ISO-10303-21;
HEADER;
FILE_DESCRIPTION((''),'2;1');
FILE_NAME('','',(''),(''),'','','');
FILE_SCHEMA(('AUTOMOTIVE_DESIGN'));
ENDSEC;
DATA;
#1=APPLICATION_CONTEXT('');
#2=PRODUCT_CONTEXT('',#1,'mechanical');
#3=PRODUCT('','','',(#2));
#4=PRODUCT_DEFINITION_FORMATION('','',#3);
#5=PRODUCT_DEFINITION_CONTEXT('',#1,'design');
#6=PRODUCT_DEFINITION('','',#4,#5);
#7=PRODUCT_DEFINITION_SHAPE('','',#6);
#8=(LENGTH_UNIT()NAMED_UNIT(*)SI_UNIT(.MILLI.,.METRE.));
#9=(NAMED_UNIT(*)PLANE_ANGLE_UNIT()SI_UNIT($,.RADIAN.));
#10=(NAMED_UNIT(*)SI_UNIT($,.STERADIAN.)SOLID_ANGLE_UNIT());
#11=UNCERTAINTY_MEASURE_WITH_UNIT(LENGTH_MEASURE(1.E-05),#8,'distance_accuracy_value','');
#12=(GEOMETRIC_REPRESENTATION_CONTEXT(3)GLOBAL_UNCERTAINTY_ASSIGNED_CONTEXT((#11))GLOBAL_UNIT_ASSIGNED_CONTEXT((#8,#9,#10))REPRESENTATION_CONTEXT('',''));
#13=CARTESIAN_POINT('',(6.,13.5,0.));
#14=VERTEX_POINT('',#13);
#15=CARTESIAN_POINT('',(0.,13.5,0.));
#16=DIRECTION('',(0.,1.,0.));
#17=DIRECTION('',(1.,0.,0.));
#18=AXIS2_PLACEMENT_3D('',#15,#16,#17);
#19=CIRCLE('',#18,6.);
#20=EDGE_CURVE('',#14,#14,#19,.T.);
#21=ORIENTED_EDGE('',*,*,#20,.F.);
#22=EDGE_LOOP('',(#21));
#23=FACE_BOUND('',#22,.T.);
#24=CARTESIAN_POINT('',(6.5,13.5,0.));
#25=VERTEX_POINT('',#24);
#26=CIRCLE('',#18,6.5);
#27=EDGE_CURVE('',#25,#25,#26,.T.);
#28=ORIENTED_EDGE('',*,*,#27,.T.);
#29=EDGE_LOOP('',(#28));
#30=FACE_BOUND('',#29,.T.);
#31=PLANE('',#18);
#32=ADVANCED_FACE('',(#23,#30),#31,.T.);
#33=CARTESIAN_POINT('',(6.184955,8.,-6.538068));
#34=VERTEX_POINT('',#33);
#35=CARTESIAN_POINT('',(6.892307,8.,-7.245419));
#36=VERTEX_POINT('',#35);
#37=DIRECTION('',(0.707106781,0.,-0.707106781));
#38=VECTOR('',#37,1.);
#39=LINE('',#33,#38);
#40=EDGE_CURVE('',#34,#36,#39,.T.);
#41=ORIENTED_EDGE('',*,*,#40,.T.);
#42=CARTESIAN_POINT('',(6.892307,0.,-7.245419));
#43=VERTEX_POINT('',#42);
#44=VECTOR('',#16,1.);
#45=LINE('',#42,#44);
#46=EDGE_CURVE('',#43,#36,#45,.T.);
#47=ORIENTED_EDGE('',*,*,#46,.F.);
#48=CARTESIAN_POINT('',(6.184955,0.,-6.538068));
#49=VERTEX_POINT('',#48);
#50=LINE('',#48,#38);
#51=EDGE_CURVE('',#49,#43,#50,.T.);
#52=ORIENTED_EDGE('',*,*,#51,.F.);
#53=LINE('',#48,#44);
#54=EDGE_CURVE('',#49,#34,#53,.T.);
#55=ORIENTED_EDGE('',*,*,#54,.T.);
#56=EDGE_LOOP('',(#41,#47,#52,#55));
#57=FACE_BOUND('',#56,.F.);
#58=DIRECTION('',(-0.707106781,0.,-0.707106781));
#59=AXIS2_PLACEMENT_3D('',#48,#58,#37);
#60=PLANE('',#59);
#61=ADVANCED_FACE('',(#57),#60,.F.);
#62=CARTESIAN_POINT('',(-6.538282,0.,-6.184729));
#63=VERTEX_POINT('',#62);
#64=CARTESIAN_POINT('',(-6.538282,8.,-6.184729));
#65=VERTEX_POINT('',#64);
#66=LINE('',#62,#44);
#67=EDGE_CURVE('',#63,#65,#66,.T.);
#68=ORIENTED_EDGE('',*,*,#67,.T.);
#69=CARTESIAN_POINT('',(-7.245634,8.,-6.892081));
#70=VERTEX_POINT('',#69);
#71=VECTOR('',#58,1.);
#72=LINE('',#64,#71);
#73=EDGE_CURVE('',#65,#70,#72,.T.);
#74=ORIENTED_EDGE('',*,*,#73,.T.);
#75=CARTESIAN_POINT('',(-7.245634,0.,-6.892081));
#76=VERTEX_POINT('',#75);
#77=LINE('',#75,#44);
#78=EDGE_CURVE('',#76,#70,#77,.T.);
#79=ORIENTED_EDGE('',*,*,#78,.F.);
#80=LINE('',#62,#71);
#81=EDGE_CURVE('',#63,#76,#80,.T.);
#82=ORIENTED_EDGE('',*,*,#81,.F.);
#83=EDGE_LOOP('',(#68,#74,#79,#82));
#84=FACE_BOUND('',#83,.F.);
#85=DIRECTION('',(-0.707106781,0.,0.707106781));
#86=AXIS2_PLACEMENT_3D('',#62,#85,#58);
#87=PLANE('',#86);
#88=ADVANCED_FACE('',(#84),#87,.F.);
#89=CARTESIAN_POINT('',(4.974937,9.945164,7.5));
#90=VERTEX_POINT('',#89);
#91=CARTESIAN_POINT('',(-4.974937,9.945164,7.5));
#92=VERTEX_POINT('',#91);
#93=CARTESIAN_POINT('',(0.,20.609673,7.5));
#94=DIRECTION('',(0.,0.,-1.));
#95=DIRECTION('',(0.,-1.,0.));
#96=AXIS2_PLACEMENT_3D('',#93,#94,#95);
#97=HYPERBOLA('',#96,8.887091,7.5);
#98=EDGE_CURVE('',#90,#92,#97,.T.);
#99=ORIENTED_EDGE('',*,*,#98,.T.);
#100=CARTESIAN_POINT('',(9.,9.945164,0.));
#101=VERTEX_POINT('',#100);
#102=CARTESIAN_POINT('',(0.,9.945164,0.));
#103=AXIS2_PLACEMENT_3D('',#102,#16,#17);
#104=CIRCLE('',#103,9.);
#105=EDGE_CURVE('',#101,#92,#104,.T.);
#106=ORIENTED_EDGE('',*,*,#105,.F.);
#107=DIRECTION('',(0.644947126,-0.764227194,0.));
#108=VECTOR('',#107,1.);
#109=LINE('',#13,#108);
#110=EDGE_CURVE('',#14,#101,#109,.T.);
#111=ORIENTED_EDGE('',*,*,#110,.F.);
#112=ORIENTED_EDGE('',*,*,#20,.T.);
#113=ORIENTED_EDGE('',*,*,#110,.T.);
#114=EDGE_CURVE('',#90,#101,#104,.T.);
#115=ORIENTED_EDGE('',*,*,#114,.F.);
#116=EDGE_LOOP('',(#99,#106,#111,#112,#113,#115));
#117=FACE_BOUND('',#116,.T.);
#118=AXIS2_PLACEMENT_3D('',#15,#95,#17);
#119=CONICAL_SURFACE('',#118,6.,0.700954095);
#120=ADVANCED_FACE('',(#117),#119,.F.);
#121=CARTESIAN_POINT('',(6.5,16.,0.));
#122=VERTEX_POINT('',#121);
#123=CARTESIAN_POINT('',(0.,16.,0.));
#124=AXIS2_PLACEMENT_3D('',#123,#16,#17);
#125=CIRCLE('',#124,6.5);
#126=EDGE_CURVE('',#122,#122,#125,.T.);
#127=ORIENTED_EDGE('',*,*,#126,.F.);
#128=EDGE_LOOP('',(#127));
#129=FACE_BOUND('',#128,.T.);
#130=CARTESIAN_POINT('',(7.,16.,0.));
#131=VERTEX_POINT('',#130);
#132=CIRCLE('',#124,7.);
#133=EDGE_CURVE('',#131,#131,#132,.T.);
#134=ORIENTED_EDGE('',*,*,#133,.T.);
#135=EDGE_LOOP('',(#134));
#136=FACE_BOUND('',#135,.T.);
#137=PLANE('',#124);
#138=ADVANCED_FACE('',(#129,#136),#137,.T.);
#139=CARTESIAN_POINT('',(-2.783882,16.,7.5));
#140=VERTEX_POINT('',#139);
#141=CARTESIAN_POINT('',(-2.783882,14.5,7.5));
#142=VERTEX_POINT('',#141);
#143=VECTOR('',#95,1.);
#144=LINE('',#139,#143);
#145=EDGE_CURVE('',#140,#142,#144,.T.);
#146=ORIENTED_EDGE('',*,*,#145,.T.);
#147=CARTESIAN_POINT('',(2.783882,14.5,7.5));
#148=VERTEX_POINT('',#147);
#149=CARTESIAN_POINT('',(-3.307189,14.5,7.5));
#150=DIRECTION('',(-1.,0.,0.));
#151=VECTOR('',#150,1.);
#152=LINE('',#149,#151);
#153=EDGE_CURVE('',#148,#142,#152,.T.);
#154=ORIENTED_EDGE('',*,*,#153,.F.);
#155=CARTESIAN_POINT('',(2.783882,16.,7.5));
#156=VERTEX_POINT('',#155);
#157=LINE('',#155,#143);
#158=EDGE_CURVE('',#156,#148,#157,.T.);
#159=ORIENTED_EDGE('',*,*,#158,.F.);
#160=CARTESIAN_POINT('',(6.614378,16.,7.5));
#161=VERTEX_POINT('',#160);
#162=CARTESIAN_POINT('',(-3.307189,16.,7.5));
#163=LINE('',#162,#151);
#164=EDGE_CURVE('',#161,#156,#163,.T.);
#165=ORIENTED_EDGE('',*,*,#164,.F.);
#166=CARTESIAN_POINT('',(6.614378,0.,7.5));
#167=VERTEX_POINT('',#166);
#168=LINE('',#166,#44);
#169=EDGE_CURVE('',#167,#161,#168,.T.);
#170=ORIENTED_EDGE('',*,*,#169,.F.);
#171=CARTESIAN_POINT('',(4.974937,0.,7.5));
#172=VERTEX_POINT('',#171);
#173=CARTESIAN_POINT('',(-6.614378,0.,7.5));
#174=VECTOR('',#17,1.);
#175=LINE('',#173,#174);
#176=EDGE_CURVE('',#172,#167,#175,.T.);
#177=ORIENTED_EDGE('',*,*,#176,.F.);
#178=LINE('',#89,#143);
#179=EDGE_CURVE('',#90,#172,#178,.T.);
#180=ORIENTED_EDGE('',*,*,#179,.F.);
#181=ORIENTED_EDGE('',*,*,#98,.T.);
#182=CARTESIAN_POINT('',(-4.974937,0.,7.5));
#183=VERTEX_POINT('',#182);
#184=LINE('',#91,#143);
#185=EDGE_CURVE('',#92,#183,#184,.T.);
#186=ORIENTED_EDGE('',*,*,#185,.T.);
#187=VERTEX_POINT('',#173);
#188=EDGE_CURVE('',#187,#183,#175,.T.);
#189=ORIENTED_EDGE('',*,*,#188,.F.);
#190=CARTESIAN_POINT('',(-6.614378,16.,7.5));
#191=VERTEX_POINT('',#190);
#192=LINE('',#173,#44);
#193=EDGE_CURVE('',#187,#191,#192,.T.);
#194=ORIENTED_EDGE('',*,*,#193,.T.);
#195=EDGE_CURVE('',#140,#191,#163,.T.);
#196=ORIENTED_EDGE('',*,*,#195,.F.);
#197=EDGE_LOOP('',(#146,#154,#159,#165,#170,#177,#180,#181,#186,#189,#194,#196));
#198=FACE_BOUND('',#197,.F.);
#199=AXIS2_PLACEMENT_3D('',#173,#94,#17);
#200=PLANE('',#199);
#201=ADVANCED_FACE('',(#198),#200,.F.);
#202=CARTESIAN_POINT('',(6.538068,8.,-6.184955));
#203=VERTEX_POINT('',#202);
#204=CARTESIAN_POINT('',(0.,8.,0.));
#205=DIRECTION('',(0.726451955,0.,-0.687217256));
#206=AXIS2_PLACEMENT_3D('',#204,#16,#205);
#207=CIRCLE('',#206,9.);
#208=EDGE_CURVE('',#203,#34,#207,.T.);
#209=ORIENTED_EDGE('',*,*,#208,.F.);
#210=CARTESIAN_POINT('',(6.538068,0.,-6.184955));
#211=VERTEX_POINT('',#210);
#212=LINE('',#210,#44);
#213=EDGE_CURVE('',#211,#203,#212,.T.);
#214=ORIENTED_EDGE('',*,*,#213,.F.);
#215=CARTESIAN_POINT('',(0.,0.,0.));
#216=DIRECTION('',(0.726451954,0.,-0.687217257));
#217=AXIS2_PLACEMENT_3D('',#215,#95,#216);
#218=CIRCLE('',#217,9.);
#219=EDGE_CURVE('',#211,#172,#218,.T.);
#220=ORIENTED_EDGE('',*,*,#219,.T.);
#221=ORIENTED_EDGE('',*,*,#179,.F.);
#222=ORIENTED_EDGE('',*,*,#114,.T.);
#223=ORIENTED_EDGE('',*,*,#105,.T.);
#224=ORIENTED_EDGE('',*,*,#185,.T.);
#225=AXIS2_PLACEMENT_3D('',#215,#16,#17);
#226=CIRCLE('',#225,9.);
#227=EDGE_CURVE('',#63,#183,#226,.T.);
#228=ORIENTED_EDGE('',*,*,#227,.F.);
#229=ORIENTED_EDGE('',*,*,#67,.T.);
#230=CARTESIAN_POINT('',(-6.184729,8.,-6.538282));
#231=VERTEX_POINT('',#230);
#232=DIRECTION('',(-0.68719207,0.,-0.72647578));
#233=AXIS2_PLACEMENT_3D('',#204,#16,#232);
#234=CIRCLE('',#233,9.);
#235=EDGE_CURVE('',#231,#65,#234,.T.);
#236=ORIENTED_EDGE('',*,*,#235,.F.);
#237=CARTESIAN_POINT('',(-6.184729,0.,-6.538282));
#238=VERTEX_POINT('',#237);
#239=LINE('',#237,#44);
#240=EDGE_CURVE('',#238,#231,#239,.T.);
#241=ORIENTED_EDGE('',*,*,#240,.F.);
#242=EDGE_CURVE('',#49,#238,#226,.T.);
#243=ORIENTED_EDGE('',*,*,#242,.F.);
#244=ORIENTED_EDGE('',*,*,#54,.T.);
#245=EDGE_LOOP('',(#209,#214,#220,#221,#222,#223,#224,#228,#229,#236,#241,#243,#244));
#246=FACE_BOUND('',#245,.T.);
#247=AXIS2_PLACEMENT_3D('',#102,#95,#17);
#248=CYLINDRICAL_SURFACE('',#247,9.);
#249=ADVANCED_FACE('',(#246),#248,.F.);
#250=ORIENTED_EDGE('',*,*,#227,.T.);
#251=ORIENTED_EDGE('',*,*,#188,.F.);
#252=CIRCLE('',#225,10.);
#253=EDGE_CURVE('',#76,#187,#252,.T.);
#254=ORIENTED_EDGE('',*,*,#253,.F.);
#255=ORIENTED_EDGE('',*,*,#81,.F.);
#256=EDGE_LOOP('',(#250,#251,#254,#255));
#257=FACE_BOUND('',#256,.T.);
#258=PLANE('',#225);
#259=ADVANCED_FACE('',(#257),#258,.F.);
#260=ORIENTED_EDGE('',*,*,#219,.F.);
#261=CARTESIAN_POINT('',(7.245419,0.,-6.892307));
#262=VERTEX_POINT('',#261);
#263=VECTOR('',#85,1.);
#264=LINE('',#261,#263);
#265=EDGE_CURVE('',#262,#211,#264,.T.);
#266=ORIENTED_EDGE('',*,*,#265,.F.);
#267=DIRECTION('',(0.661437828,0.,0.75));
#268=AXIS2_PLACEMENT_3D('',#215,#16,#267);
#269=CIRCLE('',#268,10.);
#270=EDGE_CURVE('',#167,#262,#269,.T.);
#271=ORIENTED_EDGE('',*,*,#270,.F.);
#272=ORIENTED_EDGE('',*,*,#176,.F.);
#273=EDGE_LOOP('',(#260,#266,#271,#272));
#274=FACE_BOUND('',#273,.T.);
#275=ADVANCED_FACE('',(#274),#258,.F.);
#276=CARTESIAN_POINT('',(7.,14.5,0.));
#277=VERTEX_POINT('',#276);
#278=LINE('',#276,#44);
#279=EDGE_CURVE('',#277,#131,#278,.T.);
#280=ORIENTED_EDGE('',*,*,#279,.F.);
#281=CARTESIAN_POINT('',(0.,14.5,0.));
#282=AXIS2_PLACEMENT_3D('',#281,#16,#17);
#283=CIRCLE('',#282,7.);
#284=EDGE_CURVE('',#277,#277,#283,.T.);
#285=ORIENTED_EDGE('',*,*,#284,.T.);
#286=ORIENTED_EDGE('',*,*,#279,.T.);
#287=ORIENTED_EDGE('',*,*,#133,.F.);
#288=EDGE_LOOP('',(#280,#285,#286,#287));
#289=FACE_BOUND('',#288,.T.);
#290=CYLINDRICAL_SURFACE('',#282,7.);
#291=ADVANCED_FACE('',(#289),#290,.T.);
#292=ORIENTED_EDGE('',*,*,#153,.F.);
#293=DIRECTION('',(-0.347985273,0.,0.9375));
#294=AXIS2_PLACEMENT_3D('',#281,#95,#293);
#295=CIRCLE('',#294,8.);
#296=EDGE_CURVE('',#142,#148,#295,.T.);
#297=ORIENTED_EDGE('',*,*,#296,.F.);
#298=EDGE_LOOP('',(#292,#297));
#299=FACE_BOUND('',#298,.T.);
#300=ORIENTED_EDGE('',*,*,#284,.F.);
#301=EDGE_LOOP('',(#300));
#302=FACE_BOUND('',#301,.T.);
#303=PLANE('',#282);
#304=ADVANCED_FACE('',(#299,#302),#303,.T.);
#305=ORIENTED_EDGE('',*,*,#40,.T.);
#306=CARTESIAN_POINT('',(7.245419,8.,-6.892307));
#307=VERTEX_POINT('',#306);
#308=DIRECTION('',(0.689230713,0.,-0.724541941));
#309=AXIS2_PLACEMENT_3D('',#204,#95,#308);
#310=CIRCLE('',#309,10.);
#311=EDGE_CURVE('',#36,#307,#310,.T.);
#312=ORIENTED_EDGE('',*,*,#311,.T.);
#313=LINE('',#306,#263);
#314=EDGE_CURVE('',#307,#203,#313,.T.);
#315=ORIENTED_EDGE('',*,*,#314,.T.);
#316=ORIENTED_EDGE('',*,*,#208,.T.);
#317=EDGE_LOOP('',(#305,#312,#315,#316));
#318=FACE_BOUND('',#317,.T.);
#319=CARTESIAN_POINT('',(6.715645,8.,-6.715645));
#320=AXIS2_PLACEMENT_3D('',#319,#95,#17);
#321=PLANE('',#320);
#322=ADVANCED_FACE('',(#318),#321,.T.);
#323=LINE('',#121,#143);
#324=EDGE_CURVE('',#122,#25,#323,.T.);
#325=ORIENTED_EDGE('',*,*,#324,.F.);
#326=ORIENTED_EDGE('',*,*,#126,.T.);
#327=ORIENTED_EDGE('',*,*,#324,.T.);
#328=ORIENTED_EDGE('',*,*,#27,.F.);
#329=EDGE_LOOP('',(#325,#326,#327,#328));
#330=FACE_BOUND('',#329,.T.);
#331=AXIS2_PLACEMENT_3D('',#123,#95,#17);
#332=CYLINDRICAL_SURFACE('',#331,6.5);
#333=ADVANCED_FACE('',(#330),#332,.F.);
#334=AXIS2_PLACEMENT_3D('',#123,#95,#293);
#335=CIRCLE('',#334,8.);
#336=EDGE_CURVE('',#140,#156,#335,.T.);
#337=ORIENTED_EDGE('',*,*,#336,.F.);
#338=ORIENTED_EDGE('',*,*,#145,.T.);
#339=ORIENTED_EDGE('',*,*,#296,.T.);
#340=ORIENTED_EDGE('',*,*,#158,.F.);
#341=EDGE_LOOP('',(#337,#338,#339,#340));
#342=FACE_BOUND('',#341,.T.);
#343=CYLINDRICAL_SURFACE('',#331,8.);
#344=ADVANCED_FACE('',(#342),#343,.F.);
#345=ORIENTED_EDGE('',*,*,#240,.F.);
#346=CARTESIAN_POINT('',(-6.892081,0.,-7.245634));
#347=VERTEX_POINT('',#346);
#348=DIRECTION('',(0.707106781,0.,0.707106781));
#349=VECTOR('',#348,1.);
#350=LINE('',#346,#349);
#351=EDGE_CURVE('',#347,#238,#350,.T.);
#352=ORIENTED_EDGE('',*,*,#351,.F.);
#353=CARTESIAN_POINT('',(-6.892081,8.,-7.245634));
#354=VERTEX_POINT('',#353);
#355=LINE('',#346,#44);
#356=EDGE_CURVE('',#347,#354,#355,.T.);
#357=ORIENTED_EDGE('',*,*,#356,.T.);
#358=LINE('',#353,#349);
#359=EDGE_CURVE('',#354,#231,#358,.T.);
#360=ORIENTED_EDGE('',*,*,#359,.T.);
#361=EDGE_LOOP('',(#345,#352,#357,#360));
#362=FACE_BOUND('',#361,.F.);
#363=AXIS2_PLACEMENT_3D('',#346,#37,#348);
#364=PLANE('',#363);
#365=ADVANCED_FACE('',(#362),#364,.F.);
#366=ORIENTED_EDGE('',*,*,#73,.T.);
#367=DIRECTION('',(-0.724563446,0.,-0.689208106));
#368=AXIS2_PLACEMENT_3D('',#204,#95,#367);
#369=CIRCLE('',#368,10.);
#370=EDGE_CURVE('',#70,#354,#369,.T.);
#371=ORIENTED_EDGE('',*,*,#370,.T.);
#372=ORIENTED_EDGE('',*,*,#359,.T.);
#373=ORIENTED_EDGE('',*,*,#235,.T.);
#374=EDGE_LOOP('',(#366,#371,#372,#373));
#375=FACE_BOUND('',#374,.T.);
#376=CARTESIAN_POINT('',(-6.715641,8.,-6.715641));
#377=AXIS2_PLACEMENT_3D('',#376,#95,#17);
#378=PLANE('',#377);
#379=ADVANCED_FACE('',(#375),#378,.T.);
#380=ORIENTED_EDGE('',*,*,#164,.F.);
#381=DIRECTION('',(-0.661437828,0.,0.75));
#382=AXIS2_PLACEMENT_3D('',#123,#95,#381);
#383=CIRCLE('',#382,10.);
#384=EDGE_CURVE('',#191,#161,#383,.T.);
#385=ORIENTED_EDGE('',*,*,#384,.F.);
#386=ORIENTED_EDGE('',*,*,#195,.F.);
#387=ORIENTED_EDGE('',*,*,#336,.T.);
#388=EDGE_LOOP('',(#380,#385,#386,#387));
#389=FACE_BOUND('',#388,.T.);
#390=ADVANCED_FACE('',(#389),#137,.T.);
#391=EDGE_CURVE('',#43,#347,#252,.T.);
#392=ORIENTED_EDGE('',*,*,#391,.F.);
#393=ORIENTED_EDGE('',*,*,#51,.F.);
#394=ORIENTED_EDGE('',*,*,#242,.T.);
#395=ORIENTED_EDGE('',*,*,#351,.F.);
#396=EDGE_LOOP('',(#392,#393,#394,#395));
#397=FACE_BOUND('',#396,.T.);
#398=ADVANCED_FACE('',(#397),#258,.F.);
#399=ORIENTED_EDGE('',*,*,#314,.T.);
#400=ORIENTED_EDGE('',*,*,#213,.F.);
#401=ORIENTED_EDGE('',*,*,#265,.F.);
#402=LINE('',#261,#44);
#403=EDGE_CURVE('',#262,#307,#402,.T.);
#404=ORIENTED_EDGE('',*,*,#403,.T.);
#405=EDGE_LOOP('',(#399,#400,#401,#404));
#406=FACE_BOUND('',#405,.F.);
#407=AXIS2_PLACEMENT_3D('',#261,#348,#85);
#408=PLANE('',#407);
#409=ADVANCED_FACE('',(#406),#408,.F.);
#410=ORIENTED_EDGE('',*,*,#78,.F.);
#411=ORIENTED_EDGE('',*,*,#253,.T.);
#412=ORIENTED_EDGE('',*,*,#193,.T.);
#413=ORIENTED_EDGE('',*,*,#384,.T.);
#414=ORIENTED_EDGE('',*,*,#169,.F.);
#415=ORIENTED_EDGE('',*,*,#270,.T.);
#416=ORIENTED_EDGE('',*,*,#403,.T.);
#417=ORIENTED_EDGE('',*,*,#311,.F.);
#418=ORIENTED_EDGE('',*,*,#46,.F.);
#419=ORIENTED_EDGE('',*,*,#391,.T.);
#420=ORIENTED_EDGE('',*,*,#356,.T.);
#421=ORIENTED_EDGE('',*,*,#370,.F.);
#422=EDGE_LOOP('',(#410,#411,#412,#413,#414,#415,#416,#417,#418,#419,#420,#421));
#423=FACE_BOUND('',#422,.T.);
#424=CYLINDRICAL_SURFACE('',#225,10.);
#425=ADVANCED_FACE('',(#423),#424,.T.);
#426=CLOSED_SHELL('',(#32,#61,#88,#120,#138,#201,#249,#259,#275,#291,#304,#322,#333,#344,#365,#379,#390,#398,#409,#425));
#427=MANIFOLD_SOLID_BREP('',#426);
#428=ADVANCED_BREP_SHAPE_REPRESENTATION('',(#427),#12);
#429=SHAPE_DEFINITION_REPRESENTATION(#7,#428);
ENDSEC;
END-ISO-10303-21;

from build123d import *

# Parameters (mm, degrees)
F3_DEPTH = 8
F5_DEPTH = 16.001


with BuildPart() as f1:
    # F0 (on Top) → F1 (revolve)
    with BuildSketch(Plane.XY):
        Polygon((9, 0), (10, 0), (10, 16), (8, 16), (8, 14.5), (7, 14.5), (7, 16), (6.5, 16), (6.5, 13.5), (6, 13.5), (9, 9.9451635033), align=None)
    revolve(axis=Axis((0, 8.0098584294, 0), (0, 1, 0)))

    # F2 (on face) → F3 (cut)
    with BuildSketch(Plane.XZ):
        with BuildLine():
            Line((-6.8920810625, -7.2456344531), (-6.1847286297, -6.5382820203))
            ThreePointArc((-6.1847286297, -6.5382820203), (-6.3639610307, -6.3639610307), (-6.5382820203, -6.1847286297))
            Line((-6.5382820203, -6.1847286297), (-7.2456344531, -6.8920810625))
            ThreePointArc((-7.2456344531, -6.8920810625), (-7.0710678119, -7.0710678119), (-6.8920810625, -7.2456344531))
        make_face()
        with BuildLine():
            Line((7.2454194103, -6.8923071296), (6.5380675904, -6.1849553097))
            ThreePointArc((6.5380675904, -6.1849553097), (6.3639610307, -6.3639610307), (6.1849553097, -6.5380675904))
            Line((6.1849553097, -6.5380675904), (6.8923071296, -7.2454194103))
            ThreePointArc((6.8923071296, -7.2454194103), (7.0710678119, -7.0710678119), (7.2454194103, -6.8923071296))
        make_face()
    extrude(amount=-F3_DEPTH, mode=Mode.SUBTRACT)

    # F4 (on face) → F5 (cut, through all)
    with BuildSketch(Plane.XZ):
        with BuildLine():
            Line((-4.9749371855, 7.5), (0, 7.5))
            Line((0, 7.5), (4.9749371855, 7.5))
            ThreePointArc((4.9749371855, 7.5), (0, 9), (-4.9749371855, 7.5))
        make_face()
        with BuildLine():
            ThreePointArc((-4.9749371855, 7.5), (0, 9), (4.9749371855, 7.5))
            Line((4.9749371855, 7.5), (6.6143782777, 7.5))
            ThreePointArc((6.6143782777, 7.5), (0, 10), (-6.6143782777, 7.5))
            Line((-6.6143782777, 7.5), (-4.9749371855, 7.5))
        make_face()
    extrude(amount=-F5_DEPTH, mode=Mode.SUBTRACT)


solid = f1.part
